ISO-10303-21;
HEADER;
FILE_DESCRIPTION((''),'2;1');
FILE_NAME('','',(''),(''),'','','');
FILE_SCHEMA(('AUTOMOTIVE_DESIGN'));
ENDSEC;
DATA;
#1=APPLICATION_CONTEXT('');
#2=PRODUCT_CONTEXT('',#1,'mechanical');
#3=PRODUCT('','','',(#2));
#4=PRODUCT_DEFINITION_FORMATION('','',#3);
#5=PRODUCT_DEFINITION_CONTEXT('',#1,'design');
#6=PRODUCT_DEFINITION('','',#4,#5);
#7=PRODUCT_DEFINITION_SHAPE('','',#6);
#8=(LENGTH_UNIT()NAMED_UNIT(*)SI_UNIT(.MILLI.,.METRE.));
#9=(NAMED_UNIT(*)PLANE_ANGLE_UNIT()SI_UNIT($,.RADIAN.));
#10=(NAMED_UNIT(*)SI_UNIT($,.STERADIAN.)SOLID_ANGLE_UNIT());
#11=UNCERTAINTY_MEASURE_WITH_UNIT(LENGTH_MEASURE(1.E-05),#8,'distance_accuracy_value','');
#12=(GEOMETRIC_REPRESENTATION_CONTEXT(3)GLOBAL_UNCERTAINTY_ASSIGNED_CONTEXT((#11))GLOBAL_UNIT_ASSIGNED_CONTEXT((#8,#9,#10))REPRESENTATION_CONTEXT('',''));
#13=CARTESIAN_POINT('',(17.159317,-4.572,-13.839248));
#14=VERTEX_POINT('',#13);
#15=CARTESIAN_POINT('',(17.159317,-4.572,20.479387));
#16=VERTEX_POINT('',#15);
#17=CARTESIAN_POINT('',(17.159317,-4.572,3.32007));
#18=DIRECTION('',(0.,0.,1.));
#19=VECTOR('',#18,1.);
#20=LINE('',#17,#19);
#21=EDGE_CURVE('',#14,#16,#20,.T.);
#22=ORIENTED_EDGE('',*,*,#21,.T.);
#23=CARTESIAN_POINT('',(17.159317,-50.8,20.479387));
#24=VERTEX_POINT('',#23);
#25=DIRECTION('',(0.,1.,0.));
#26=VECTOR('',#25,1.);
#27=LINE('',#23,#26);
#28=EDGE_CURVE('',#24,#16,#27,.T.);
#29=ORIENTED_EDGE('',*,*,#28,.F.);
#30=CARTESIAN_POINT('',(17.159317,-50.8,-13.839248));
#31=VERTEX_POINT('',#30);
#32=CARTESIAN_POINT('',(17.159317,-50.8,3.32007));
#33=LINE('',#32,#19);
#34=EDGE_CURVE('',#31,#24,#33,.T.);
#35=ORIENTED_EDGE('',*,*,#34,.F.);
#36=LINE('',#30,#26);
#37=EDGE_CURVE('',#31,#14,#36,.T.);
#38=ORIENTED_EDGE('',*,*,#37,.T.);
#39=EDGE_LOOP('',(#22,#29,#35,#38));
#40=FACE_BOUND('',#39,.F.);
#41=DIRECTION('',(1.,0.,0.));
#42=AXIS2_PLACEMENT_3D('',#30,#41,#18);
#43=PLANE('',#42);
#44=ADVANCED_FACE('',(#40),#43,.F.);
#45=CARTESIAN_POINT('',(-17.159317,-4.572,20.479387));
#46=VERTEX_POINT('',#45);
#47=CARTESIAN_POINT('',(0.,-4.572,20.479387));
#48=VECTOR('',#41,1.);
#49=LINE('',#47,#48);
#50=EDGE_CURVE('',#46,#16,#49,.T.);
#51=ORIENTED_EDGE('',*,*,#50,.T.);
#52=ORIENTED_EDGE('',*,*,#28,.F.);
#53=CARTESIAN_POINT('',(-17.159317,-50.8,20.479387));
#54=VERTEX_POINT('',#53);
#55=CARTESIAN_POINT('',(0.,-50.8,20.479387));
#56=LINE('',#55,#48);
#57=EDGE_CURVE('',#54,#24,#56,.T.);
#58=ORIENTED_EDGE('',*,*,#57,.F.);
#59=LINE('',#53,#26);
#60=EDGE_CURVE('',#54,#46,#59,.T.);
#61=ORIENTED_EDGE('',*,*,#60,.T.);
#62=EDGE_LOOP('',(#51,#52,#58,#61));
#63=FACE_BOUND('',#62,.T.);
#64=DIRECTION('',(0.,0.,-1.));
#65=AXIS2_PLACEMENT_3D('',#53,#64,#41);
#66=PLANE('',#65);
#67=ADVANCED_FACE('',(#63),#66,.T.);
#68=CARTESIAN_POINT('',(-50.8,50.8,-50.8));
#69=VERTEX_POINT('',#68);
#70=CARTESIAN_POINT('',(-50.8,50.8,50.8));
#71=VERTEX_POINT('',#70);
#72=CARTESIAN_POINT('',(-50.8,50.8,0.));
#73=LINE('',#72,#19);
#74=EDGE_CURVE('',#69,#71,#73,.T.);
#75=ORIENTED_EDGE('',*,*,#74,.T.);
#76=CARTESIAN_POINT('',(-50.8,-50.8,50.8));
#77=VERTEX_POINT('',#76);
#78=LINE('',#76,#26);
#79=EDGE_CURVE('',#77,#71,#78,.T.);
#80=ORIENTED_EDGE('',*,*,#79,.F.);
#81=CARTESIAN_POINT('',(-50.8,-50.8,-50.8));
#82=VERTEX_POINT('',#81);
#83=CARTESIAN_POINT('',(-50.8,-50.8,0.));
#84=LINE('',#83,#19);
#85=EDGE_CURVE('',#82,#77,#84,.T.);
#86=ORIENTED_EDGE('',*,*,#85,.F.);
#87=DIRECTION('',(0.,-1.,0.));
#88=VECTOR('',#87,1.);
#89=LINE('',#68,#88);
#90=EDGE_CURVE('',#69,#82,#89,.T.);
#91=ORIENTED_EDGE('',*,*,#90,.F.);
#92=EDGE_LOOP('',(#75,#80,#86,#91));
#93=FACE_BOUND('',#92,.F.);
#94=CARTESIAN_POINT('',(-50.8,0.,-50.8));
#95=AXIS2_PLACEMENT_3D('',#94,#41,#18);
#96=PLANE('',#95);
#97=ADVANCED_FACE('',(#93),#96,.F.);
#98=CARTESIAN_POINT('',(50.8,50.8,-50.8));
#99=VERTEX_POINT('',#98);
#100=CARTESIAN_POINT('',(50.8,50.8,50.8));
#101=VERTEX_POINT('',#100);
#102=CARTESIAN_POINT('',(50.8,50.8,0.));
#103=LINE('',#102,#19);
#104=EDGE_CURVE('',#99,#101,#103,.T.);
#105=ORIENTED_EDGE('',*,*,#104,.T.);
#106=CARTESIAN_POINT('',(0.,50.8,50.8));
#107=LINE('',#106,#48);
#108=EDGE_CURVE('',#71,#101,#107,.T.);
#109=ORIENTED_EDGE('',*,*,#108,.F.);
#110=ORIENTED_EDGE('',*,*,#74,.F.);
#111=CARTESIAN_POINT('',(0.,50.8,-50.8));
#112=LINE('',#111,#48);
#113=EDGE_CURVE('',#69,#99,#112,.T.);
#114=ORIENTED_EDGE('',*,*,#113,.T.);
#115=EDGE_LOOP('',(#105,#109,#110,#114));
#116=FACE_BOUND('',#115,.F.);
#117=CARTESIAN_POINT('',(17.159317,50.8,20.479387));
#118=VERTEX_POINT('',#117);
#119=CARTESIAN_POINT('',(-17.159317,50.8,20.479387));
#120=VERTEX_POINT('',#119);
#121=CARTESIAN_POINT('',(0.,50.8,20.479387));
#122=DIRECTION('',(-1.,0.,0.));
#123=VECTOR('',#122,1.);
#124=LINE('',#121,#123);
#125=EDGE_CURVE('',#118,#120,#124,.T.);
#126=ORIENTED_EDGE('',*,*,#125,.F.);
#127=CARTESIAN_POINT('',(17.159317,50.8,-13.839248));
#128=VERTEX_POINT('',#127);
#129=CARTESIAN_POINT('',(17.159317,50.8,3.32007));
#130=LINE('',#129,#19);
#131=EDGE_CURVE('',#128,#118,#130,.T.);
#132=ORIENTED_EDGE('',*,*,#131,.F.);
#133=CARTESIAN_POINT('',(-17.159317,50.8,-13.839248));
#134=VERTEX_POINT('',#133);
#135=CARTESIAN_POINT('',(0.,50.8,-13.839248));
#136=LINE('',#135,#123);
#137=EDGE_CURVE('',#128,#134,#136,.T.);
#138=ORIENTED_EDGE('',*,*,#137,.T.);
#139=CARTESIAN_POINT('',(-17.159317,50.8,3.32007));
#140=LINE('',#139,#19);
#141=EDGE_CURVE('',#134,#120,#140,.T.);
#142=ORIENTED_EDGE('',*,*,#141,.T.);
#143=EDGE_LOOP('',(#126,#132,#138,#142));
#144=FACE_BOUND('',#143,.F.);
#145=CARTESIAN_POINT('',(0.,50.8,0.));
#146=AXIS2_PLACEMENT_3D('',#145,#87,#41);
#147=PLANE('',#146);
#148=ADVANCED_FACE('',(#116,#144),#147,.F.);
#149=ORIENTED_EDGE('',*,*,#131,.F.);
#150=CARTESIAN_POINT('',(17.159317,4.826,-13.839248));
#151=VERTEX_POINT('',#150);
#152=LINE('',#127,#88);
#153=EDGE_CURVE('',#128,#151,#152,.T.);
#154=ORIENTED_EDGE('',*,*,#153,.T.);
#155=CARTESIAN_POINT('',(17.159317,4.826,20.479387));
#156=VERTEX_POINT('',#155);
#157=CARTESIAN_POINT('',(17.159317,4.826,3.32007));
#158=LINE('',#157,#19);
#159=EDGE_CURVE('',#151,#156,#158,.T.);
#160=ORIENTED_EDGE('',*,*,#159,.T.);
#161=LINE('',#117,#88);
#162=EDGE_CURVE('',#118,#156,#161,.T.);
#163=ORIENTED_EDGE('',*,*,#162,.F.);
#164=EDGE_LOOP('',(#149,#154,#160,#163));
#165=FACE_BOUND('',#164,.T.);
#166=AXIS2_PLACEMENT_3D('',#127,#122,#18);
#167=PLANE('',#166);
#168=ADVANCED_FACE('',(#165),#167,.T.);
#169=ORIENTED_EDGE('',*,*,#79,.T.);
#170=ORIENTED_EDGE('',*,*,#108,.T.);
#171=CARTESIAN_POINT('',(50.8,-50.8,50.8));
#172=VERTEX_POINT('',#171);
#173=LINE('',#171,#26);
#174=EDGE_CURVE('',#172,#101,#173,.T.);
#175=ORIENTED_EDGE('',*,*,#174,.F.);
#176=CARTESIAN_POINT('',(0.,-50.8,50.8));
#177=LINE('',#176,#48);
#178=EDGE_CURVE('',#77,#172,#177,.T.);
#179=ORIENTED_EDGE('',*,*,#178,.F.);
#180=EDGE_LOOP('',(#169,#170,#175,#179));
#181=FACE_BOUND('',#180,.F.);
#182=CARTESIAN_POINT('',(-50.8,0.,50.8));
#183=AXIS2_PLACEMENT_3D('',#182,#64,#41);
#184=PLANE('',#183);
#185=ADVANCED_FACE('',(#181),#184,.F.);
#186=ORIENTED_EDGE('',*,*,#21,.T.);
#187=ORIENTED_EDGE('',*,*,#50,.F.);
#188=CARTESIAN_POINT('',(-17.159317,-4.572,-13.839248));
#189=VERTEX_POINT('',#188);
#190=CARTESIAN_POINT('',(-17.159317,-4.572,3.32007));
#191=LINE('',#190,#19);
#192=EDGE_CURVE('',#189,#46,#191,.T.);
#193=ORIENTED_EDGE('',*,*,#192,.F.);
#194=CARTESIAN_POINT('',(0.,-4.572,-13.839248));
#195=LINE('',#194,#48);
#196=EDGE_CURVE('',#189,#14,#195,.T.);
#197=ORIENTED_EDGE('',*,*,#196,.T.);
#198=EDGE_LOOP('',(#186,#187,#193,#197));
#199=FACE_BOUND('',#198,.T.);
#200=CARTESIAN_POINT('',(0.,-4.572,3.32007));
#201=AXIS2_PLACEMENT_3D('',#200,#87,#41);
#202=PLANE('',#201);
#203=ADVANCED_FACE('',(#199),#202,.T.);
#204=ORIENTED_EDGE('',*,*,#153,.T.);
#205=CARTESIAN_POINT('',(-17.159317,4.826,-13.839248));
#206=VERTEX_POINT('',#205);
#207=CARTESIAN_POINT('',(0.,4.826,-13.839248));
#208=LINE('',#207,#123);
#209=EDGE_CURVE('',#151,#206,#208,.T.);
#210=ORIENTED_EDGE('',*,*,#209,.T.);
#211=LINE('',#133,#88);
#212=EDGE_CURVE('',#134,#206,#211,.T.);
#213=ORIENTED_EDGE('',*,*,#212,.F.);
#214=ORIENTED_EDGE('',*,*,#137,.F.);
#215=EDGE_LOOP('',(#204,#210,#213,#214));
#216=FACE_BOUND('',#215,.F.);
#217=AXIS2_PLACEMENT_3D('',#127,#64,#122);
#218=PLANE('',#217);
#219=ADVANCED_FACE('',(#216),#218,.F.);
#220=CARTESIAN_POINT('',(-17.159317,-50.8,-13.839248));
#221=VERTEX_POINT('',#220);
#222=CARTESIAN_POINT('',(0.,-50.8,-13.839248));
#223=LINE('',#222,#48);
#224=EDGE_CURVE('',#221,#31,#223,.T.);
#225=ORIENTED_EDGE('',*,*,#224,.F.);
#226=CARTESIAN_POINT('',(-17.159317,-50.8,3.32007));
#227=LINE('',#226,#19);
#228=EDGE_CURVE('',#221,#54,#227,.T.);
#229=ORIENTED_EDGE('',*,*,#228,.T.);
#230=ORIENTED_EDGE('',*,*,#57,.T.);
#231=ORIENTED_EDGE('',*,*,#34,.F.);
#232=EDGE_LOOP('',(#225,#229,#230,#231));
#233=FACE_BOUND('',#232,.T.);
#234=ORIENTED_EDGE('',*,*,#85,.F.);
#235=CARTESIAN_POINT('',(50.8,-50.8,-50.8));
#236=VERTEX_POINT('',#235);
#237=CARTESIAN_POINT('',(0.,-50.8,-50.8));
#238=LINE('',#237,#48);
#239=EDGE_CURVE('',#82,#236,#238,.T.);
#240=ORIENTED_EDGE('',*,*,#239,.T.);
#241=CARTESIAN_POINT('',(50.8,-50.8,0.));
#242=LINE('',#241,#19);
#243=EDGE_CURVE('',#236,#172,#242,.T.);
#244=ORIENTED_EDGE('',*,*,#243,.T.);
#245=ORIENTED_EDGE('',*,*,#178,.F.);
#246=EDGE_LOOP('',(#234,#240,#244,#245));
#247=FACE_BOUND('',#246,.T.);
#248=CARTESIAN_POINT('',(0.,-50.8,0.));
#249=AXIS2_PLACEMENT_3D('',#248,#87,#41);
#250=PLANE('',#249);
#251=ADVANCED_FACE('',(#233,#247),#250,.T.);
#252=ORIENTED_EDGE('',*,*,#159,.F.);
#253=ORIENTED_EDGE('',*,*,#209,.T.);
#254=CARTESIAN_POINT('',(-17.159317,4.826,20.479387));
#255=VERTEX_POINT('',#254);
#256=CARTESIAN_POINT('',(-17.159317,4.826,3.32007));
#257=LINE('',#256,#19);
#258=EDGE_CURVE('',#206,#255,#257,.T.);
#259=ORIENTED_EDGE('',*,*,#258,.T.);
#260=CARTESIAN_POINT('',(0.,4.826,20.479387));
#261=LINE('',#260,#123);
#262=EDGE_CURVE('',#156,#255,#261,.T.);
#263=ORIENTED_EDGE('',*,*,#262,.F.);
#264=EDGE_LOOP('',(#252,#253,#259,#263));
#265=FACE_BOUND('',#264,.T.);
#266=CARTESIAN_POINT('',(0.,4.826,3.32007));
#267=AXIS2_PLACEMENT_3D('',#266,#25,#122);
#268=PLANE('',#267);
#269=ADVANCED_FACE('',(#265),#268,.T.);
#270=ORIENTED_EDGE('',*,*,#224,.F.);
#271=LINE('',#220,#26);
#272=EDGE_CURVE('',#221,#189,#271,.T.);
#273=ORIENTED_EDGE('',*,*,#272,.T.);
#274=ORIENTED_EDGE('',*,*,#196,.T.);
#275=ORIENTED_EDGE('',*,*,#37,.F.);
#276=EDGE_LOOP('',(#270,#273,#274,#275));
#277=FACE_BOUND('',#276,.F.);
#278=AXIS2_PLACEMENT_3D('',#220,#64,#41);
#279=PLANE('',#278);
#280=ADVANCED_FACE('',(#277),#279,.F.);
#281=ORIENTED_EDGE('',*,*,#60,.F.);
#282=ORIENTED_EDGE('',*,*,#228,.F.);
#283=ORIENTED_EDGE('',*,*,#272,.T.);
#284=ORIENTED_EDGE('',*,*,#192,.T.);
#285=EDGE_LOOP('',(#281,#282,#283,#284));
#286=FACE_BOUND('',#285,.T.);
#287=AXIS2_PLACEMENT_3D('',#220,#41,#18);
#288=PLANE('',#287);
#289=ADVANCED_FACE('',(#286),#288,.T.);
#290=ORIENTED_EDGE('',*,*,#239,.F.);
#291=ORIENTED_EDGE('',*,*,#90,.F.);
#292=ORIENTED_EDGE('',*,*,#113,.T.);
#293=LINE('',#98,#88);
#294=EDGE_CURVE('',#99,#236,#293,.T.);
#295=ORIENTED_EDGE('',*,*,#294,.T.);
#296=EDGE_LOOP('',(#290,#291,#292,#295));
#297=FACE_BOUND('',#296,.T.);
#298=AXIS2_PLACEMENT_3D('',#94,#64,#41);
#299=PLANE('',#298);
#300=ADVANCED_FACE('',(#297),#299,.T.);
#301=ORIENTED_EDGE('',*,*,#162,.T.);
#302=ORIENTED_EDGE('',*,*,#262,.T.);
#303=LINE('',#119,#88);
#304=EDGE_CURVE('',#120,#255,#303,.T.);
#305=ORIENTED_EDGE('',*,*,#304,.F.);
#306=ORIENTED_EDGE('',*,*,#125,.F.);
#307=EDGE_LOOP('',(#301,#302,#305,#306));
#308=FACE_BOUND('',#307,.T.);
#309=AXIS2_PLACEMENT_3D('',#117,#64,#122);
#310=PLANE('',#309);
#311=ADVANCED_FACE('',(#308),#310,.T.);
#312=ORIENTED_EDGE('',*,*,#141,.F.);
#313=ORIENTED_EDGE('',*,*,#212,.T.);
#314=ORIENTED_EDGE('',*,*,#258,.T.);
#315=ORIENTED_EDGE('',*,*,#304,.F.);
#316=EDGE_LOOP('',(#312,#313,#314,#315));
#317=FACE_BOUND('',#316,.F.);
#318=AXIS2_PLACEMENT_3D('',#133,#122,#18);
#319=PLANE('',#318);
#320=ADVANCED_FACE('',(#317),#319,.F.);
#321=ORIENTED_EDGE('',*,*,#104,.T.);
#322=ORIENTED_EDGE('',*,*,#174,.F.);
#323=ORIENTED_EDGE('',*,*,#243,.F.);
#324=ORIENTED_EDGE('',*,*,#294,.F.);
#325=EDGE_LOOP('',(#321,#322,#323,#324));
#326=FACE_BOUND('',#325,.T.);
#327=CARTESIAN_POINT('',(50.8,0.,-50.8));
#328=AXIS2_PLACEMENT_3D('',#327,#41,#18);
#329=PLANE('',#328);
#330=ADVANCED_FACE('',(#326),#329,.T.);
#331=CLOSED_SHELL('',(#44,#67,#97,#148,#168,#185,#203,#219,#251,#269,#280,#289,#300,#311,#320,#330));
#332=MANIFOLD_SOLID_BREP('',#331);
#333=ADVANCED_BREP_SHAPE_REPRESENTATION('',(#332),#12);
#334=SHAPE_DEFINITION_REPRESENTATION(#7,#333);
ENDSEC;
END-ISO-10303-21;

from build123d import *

# Parameters (mm, degrees)
F1_W     = 101.6
F1_H     = 101.6
F2_DEPTH = 50.8
F3_W     = 34.3186343089
F3_H     = 34.3186343089
F4_DEPTH = 46.228
F5_W     = 34.3186343089
F5_H     = 34.3186343089
F6_DEPTH = 45.974


# Not quite as in the source:
# - a variable given as a bare number and used for a length is read in inches; the dataset says mm whatever the document's units were


with BuildPart() as f2:
    # F1 (on Front) → F2 (new body, symmetric)
    with BuildSketch(Plane.XZ):
        Rectangle(F1_W, F1_H)
    extrude(amount=F2_DEPTH, both=True)

    # F3 (on face) → F4 (cut)
    with BuildSketch(Plane.XZ.offset(50.8)):
        with Locations((0, 3.3200695179)):
            Rectangle(F3_W, F3_H)
    extrude(amount=-F4_DEPTH, mode=Mode.SUBTRACT)

    # F5 (on face) → F6 (cut)
    with BuildSketch(Plane(origin=(0, 50.8, 0), x_dir=(-1, 0, 0), z_dir=(0, 1, 0))):
        with Locations((0, 3.3200695179)):
            Rectangle(F5_W, F5_H)
    extrude(amount=-F6_DEPTH, mode=Mode.SUBTRACT)


solid = f2.part
